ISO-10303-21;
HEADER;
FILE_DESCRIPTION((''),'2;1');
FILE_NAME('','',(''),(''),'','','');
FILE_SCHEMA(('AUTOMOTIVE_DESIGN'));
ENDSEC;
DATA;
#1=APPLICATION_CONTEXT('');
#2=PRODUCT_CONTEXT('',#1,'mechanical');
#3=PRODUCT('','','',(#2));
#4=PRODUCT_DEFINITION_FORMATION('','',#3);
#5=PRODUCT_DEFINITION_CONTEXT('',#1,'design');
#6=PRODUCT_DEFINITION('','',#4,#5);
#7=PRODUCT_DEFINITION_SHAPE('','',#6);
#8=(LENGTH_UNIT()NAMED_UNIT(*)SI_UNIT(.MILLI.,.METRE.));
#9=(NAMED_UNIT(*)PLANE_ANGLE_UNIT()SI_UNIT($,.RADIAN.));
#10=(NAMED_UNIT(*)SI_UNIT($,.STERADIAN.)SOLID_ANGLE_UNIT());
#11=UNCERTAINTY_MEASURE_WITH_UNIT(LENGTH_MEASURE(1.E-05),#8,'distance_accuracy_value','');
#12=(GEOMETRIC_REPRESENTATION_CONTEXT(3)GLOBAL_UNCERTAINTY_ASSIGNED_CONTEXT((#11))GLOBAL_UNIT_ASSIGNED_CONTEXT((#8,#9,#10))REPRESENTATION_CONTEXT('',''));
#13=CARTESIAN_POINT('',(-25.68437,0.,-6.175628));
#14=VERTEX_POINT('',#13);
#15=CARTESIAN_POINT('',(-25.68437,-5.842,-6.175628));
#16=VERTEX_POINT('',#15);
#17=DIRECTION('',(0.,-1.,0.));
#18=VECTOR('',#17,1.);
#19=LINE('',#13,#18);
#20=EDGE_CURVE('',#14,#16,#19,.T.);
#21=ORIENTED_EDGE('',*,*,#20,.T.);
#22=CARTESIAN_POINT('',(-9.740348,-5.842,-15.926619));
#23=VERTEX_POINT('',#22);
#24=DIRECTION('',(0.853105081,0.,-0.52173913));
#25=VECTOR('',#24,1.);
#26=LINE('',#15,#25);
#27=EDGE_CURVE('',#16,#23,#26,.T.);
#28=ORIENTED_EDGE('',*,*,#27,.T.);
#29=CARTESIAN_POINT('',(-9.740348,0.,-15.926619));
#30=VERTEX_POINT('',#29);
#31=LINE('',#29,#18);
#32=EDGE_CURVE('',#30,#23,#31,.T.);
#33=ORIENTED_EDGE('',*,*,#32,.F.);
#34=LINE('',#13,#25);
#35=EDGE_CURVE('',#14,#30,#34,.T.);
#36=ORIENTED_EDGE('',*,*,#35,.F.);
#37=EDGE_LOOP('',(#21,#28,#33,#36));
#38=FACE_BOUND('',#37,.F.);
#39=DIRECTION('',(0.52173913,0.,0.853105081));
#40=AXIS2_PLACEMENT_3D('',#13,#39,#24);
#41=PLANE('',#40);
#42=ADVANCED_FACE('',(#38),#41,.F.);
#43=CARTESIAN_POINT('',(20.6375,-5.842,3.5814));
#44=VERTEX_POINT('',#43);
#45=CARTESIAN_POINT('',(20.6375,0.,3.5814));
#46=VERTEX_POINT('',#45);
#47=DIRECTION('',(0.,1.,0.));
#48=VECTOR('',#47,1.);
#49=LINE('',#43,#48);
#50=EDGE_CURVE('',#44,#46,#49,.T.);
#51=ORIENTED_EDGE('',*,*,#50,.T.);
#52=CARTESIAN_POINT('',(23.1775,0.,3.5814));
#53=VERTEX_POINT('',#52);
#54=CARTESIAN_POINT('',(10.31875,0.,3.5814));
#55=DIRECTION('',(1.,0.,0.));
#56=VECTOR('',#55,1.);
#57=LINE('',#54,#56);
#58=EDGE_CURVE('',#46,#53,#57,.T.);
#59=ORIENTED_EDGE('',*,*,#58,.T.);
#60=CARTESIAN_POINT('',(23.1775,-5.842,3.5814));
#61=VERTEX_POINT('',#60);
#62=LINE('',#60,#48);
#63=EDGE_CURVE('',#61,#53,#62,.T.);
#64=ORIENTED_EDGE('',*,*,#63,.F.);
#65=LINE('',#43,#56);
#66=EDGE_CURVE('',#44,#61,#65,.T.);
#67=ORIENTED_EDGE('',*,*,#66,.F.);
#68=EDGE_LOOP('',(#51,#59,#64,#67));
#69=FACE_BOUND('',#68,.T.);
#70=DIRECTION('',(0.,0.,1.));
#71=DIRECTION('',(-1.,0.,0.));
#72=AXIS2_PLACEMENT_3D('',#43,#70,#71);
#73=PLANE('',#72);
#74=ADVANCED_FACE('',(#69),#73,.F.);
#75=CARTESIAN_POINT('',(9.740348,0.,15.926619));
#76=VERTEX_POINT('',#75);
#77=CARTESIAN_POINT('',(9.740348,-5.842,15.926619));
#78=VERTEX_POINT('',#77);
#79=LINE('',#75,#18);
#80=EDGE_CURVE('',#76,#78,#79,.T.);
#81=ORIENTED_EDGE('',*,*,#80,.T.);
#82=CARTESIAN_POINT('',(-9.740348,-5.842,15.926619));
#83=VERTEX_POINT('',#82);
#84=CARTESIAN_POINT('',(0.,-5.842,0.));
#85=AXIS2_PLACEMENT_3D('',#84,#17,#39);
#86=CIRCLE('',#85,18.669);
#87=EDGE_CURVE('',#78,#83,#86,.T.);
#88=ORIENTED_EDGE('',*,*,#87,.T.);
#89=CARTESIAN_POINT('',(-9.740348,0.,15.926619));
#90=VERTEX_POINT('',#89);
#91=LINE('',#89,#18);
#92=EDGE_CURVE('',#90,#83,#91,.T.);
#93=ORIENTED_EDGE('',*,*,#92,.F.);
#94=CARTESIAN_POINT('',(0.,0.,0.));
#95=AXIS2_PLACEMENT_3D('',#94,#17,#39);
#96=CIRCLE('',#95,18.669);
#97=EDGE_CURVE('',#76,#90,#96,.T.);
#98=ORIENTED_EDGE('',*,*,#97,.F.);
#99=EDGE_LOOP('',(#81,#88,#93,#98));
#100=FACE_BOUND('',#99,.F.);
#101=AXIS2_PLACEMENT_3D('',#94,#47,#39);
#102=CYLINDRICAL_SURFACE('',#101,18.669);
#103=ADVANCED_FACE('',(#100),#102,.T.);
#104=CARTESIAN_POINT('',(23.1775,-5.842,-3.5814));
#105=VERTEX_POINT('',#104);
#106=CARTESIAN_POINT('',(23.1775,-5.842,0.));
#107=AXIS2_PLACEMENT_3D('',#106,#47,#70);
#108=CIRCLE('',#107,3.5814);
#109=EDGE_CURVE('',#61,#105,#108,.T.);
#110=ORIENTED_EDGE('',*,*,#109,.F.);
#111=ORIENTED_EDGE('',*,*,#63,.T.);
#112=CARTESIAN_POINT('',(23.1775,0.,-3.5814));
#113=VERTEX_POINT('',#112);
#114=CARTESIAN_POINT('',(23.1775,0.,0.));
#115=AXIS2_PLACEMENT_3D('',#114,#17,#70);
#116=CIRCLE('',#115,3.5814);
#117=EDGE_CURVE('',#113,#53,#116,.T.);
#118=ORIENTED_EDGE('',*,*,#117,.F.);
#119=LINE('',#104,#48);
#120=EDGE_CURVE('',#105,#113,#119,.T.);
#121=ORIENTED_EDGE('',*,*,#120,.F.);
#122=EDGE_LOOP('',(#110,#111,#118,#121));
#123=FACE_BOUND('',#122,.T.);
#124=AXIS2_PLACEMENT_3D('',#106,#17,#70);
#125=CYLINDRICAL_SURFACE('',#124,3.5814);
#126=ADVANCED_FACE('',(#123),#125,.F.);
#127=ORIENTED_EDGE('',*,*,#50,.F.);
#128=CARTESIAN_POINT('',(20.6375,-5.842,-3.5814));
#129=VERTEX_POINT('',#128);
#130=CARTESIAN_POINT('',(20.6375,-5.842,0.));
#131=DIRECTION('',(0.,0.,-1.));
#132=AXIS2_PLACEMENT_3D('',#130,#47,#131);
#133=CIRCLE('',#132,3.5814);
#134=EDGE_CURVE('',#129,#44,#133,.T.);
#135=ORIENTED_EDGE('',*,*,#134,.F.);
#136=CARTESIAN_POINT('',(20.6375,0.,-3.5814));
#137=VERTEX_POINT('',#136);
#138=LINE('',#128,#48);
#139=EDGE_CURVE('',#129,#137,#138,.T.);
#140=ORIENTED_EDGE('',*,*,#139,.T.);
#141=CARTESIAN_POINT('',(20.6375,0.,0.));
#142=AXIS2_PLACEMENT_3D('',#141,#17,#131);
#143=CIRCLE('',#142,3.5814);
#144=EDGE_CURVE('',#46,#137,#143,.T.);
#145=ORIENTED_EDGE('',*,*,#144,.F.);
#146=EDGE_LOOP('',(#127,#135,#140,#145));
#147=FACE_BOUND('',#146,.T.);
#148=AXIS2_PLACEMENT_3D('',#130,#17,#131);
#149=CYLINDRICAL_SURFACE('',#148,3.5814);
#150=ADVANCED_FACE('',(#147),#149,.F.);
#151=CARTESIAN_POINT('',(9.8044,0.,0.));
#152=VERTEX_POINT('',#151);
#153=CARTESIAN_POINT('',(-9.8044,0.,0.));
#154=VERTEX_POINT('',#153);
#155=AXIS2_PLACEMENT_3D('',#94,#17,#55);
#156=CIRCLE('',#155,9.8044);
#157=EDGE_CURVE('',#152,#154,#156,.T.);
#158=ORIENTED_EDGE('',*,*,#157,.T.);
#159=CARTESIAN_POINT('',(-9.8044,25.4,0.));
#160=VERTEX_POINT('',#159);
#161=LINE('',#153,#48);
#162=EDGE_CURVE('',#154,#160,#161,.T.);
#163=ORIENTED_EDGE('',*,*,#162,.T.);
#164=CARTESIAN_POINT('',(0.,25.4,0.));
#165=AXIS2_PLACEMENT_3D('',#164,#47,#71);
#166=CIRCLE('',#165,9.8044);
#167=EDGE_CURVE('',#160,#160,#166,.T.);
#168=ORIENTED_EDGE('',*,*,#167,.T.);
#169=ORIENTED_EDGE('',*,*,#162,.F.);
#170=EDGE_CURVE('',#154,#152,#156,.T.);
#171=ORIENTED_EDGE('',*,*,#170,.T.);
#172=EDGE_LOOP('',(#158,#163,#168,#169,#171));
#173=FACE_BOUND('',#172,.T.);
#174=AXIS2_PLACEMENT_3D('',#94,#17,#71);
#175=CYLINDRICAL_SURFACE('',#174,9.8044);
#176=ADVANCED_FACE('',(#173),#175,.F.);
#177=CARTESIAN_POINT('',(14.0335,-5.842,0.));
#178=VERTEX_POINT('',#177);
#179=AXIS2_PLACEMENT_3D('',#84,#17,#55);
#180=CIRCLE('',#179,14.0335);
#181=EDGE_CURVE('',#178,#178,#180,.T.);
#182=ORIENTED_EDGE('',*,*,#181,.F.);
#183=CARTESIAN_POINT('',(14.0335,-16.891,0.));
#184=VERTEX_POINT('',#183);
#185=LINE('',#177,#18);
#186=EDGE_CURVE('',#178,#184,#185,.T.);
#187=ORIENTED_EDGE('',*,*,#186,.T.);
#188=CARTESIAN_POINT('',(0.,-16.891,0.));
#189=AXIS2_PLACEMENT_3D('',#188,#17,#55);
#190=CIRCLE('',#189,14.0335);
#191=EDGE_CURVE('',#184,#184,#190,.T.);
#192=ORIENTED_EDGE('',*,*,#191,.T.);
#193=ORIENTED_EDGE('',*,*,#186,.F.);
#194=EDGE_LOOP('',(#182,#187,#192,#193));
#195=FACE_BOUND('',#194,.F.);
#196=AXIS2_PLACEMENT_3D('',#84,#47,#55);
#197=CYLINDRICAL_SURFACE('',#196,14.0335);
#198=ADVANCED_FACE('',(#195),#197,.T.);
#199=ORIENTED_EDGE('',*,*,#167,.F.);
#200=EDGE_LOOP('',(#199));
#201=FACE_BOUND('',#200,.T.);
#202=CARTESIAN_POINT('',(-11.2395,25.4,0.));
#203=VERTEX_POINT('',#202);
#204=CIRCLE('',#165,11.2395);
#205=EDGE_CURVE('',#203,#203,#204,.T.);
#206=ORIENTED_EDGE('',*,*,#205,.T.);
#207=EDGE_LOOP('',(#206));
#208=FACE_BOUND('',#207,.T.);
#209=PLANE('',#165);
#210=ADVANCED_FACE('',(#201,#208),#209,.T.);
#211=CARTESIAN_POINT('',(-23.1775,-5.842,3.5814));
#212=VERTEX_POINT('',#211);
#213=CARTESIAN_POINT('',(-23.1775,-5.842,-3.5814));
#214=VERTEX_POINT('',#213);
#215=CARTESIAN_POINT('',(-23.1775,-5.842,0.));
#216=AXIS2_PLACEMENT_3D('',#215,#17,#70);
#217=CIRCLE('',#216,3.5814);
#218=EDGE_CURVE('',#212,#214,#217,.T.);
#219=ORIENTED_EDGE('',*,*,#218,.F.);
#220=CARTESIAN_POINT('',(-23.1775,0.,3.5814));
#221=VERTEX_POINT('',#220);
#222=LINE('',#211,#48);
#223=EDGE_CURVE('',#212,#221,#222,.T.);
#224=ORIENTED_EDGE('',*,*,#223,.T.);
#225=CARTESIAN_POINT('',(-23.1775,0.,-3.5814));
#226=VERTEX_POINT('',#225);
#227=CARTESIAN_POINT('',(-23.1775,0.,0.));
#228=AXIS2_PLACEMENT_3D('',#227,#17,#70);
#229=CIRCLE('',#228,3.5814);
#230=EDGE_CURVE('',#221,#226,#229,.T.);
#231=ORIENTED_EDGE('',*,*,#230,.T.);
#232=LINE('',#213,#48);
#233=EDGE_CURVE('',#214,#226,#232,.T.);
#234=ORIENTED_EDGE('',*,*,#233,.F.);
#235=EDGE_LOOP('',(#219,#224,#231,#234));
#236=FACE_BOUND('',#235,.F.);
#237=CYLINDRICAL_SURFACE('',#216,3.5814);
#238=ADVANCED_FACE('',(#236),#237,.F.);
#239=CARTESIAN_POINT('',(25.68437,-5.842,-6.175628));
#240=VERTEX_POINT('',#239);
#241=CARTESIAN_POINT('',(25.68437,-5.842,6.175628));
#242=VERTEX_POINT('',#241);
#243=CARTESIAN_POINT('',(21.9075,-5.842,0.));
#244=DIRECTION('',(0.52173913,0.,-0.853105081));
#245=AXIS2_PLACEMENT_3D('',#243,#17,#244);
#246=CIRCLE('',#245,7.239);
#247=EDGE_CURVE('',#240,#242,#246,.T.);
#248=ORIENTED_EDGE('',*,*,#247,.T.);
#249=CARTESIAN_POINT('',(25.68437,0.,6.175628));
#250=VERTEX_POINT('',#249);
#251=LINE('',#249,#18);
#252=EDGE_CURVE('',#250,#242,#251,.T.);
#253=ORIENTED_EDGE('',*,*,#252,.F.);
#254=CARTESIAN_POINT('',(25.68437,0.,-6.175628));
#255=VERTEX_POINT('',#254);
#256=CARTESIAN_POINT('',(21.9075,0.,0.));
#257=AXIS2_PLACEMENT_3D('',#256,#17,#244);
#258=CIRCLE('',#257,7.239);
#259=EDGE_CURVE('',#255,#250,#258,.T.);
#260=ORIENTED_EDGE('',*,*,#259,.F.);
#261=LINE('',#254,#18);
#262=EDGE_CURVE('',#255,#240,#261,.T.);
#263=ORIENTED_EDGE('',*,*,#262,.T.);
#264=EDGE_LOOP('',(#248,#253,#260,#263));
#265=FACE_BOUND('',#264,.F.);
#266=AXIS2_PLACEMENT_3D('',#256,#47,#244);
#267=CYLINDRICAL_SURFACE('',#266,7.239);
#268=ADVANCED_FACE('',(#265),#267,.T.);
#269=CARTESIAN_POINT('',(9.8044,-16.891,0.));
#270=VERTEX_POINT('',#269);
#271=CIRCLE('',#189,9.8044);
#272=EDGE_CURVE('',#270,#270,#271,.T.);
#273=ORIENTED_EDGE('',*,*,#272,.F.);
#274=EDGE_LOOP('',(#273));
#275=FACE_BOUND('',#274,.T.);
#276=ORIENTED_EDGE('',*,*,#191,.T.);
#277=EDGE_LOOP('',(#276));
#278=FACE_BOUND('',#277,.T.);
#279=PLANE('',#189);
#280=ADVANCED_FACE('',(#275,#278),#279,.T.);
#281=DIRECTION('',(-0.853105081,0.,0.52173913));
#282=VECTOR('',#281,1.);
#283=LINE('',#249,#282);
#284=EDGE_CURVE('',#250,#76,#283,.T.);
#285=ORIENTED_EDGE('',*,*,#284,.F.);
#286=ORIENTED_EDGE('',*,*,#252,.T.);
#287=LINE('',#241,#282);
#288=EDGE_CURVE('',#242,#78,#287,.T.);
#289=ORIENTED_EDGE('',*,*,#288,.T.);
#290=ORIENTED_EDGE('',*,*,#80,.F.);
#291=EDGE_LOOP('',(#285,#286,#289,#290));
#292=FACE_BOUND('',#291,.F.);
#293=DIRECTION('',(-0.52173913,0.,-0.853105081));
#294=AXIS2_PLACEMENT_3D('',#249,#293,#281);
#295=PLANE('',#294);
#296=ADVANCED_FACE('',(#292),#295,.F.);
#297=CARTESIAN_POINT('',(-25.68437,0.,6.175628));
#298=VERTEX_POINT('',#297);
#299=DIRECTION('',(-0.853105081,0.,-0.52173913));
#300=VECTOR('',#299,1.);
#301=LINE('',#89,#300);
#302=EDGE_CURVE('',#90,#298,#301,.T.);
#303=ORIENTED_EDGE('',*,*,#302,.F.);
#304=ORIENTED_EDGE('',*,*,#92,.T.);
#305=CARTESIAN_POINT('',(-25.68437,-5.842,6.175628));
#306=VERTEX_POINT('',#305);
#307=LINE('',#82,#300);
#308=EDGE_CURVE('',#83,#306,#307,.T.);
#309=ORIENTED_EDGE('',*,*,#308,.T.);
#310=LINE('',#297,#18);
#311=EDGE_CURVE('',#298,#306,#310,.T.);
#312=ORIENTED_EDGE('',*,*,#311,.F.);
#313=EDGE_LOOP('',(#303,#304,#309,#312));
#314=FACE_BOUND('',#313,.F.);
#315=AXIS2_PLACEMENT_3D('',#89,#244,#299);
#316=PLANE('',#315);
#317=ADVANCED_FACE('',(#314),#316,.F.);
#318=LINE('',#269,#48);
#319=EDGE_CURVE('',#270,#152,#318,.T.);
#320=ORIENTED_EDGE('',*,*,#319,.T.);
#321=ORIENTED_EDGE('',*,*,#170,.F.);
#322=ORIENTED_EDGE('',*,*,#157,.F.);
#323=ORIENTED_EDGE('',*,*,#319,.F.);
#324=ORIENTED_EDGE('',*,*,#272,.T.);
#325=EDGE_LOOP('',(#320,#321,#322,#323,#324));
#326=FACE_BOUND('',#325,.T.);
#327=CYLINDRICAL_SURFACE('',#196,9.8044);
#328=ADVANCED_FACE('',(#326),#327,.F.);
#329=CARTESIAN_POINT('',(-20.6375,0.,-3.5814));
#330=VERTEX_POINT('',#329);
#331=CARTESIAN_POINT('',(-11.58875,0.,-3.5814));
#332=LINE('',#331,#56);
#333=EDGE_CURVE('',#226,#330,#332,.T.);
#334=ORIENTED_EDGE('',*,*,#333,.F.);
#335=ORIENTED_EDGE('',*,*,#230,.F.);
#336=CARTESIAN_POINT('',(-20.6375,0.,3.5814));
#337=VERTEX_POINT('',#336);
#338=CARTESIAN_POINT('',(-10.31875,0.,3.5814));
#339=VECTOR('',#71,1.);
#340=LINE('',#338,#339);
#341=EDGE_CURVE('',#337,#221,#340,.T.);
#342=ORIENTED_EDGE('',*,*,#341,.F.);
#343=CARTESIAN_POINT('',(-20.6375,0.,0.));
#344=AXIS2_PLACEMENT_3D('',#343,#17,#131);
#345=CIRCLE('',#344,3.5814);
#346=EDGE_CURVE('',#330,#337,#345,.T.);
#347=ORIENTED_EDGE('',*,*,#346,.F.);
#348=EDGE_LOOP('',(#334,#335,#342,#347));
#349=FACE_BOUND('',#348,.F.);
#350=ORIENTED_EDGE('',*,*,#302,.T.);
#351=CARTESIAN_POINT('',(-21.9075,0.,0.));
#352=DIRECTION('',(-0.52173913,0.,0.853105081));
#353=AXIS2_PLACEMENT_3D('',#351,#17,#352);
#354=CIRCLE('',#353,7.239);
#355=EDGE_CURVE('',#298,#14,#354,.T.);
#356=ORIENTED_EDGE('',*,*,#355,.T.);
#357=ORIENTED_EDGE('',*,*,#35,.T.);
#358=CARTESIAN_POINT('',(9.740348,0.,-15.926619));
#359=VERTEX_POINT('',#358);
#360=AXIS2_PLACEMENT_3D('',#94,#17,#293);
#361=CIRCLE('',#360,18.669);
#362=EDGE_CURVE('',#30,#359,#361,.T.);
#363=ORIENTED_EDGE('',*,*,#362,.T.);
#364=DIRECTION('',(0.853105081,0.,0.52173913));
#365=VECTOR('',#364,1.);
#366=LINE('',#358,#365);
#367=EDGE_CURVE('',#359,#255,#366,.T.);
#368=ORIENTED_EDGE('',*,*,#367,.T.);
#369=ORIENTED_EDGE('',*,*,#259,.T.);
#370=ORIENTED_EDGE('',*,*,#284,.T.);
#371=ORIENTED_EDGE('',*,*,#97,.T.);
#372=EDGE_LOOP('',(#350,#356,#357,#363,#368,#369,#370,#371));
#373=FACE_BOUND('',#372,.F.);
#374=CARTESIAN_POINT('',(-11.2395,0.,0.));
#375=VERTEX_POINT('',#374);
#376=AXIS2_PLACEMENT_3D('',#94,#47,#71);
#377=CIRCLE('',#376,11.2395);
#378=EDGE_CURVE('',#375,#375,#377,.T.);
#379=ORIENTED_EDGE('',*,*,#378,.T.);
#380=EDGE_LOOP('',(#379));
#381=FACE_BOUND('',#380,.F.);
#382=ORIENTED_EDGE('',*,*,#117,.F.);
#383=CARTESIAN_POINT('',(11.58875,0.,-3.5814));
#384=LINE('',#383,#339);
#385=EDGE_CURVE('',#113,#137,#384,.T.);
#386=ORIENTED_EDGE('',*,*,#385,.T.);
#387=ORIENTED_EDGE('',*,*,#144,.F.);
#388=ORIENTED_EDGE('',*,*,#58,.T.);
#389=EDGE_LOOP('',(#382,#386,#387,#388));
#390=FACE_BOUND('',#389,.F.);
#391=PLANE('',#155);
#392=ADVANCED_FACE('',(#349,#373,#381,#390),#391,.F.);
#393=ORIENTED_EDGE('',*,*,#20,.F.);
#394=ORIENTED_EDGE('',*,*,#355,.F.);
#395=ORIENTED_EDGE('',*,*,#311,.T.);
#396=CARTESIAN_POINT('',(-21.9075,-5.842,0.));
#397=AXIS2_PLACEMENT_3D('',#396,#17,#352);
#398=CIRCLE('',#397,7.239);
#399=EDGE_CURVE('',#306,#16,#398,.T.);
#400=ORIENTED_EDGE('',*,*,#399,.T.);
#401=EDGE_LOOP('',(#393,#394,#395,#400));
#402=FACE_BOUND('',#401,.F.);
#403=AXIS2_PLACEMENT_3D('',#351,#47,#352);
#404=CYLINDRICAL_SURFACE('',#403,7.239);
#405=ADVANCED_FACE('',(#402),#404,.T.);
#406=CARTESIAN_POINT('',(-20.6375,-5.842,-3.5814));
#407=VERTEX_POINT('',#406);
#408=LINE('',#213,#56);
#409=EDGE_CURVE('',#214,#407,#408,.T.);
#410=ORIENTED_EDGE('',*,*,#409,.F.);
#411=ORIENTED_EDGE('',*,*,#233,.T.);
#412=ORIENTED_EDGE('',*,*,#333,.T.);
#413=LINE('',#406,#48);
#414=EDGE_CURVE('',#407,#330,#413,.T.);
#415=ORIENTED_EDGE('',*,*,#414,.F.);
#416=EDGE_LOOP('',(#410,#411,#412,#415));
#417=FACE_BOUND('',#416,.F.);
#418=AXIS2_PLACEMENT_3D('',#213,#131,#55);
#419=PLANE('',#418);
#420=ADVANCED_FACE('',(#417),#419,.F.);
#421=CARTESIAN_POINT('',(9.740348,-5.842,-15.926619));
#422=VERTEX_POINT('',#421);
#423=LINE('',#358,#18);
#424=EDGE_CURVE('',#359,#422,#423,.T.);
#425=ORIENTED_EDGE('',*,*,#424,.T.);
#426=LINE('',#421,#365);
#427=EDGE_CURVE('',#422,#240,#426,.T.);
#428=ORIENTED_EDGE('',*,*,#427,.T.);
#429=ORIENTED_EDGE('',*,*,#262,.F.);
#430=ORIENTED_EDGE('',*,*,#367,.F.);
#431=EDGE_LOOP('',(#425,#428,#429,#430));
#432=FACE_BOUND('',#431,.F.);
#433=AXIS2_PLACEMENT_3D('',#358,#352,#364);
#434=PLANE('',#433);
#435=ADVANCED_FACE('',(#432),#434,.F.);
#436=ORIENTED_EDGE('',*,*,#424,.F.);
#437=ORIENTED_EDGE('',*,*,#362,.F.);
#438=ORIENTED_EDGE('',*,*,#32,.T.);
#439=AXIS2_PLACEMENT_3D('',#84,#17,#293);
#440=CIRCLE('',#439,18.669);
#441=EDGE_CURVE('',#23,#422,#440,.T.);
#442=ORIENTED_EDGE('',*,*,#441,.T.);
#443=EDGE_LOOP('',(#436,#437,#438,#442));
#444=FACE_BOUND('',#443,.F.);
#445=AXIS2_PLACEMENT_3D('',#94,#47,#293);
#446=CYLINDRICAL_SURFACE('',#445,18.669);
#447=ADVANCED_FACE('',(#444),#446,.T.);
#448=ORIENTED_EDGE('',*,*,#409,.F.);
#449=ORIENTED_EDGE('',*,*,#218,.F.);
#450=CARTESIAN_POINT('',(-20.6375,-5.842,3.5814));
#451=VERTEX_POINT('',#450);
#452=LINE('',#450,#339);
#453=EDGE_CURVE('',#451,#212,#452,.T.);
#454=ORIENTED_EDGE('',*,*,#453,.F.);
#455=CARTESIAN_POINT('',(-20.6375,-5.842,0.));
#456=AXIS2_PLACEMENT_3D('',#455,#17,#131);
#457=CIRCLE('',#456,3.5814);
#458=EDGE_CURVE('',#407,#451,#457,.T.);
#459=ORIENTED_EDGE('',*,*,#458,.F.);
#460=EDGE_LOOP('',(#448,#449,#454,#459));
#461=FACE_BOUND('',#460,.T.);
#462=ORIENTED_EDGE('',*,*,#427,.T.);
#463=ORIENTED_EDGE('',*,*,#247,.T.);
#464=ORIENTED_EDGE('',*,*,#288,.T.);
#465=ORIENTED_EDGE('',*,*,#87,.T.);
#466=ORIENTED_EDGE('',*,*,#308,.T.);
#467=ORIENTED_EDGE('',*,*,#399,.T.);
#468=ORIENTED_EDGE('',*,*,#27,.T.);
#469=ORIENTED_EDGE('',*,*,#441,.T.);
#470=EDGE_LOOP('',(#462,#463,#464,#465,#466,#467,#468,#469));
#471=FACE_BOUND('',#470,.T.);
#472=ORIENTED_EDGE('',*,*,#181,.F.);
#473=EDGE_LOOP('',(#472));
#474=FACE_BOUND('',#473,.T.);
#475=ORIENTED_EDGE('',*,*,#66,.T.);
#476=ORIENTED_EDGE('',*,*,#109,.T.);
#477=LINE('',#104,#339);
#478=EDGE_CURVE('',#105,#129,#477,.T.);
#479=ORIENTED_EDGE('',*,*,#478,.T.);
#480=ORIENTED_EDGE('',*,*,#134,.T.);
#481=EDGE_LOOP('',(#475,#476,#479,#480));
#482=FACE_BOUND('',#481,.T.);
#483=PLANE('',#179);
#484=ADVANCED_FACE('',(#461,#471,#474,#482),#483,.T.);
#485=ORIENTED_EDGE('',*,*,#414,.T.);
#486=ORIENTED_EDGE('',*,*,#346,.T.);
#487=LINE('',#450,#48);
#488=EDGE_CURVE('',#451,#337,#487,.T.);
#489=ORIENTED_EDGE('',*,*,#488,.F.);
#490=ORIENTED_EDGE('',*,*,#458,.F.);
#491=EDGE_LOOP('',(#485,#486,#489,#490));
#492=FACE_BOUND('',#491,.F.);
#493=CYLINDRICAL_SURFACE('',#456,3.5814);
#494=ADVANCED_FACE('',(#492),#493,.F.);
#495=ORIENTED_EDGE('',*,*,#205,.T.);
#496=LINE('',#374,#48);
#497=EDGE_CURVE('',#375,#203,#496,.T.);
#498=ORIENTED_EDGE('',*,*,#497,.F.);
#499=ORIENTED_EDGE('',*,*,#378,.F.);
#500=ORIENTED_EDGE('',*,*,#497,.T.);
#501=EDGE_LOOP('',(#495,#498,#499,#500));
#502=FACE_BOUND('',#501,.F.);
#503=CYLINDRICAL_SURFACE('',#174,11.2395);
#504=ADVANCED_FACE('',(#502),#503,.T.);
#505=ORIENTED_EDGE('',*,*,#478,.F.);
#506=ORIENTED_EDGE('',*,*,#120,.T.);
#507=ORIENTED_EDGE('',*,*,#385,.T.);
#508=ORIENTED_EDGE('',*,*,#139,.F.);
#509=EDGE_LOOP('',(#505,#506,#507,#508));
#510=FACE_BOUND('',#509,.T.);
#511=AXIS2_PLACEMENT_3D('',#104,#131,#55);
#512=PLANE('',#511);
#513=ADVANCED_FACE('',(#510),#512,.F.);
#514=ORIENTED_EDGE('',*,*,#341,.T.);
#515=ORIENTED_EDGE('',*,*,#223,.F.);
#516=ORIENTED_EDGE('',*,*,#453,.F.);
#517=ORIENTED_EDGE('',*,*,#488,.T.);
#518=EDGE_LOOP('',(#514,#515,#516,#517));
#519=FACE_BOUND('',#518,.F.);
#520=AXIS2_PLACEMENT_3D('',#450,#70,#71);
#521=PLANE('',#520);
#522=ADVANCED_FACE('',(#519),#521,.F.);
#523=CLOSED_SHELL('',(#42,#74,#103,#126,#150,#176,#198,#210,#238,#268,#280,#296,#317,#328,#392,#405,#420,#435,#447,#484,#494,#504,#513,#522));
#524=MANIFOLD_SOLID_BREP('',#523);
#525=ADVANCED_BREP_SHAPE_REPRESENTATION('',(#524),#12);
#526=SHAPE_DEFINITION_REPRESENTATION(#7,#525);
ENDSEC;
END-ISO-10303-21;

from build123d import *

# Parameters (mm, degrees)
F0_R     = 9.8044
F1_DEPTH = 5.842
F3_DEPTH = 5.843
F4_R     = 14.0335
F4_R_2   = 9.8044
F5_DEPTH = 11.049
F6_R     = 11.2395
F6_R_2   = 9.8044
F7_DEPTH = 25.4


# Not quite as in the source:
# - a pattern or mirror of a feature is missing from the dataset's text; its kind, count and spacing are read off the source's solid


with BuildPart() as f1:
    # F0 (on Front) → F1 (new body)
    with BuildSketch(Plane.XZ):
        with BuildLine():
            Line((25.6843695652, 6.1756276837), (9.7403478261, 15.9266187632))
            ThreePointArc((9.7403478261, 15.9266187632), (0, 18.669), (-9.7403478261, 15.9266187632))
            Line((-9.7403478261, 15.9266187632), (-25.6843695652, 6.1756276837))
            ThreePointArc((-25.6843695652, 6.1756276837), (-29.1465, 0), (-25.6843695652, -6.1756276837))
            Line((-25.6843695652, -6.1756276837), (-9.7403478261, -15.9266187632))
            ThreePointArc((-9.7403478261, -15.9266187632), (0, -18.669), (9.7403478261, -15.9266187632))
            Line((9.7403478261, -15.9266187632), (25.6843695652, -6.1756276837))
            ThreePointArc((25.6843695652, -6.1756276837), (29.1465, 0), (25.6843695652, 6.1756276837))
        make_face()
        Circle(F0_R, mode=Mode.SUBTRACT)
    extrude(amount=F1_DEPTH)

    # F2 (on face) → F3 (cut, through all)
    with BuildSketch(Plane.XZ.offset(5.842)):
        with BuildLine():
            ThreePointArc((-23.1775, 3.5814), (-26.7589, 0), (-23.1775, -3.5814))
            Line((-23.1775, -3.5814), (-20.6375, -3.5814))
            ThreePointArc((-20.6375, -3.5814), (-17.0561, 0), (-20.6375, 3.5814))
            Line((-20.6375, 3.5814), (-23.1775, 3.5814))
        make_face()
    f3 = extrude(amount=-F3_DEPTH, mode=Mode.SUBTRACT)

    # F3_copies: F3 across plane
    add(f3.mirror(Plane(origin=(0, 0, 0), x_dir=(0, 0, 1), z_dir=(1, 0, 0))), mode=Mode.SUBTRACT)

    # F4 (on face) → F5 (join)
    with BuildSketch(Plane.XZ.offset(5.842)):
        Circle(F4_R)
        Circle(F4_R_2, mode=Mode.SUBTRACT)
    extrude(amount=F5_DEPTH)

    # F6 (on face) → F7 (join)
    with BuildSketch(Plane(origin=(0, 0, 0), x_dir=(-1, 0, 0), z_dir=(0, 1, 0))):
        Circle(F6_R)
        Circle(F6_R_2, mode=Mode.SUBTRACT)
    extrude(amount=F7_DEPTH)


solid = f1.part
